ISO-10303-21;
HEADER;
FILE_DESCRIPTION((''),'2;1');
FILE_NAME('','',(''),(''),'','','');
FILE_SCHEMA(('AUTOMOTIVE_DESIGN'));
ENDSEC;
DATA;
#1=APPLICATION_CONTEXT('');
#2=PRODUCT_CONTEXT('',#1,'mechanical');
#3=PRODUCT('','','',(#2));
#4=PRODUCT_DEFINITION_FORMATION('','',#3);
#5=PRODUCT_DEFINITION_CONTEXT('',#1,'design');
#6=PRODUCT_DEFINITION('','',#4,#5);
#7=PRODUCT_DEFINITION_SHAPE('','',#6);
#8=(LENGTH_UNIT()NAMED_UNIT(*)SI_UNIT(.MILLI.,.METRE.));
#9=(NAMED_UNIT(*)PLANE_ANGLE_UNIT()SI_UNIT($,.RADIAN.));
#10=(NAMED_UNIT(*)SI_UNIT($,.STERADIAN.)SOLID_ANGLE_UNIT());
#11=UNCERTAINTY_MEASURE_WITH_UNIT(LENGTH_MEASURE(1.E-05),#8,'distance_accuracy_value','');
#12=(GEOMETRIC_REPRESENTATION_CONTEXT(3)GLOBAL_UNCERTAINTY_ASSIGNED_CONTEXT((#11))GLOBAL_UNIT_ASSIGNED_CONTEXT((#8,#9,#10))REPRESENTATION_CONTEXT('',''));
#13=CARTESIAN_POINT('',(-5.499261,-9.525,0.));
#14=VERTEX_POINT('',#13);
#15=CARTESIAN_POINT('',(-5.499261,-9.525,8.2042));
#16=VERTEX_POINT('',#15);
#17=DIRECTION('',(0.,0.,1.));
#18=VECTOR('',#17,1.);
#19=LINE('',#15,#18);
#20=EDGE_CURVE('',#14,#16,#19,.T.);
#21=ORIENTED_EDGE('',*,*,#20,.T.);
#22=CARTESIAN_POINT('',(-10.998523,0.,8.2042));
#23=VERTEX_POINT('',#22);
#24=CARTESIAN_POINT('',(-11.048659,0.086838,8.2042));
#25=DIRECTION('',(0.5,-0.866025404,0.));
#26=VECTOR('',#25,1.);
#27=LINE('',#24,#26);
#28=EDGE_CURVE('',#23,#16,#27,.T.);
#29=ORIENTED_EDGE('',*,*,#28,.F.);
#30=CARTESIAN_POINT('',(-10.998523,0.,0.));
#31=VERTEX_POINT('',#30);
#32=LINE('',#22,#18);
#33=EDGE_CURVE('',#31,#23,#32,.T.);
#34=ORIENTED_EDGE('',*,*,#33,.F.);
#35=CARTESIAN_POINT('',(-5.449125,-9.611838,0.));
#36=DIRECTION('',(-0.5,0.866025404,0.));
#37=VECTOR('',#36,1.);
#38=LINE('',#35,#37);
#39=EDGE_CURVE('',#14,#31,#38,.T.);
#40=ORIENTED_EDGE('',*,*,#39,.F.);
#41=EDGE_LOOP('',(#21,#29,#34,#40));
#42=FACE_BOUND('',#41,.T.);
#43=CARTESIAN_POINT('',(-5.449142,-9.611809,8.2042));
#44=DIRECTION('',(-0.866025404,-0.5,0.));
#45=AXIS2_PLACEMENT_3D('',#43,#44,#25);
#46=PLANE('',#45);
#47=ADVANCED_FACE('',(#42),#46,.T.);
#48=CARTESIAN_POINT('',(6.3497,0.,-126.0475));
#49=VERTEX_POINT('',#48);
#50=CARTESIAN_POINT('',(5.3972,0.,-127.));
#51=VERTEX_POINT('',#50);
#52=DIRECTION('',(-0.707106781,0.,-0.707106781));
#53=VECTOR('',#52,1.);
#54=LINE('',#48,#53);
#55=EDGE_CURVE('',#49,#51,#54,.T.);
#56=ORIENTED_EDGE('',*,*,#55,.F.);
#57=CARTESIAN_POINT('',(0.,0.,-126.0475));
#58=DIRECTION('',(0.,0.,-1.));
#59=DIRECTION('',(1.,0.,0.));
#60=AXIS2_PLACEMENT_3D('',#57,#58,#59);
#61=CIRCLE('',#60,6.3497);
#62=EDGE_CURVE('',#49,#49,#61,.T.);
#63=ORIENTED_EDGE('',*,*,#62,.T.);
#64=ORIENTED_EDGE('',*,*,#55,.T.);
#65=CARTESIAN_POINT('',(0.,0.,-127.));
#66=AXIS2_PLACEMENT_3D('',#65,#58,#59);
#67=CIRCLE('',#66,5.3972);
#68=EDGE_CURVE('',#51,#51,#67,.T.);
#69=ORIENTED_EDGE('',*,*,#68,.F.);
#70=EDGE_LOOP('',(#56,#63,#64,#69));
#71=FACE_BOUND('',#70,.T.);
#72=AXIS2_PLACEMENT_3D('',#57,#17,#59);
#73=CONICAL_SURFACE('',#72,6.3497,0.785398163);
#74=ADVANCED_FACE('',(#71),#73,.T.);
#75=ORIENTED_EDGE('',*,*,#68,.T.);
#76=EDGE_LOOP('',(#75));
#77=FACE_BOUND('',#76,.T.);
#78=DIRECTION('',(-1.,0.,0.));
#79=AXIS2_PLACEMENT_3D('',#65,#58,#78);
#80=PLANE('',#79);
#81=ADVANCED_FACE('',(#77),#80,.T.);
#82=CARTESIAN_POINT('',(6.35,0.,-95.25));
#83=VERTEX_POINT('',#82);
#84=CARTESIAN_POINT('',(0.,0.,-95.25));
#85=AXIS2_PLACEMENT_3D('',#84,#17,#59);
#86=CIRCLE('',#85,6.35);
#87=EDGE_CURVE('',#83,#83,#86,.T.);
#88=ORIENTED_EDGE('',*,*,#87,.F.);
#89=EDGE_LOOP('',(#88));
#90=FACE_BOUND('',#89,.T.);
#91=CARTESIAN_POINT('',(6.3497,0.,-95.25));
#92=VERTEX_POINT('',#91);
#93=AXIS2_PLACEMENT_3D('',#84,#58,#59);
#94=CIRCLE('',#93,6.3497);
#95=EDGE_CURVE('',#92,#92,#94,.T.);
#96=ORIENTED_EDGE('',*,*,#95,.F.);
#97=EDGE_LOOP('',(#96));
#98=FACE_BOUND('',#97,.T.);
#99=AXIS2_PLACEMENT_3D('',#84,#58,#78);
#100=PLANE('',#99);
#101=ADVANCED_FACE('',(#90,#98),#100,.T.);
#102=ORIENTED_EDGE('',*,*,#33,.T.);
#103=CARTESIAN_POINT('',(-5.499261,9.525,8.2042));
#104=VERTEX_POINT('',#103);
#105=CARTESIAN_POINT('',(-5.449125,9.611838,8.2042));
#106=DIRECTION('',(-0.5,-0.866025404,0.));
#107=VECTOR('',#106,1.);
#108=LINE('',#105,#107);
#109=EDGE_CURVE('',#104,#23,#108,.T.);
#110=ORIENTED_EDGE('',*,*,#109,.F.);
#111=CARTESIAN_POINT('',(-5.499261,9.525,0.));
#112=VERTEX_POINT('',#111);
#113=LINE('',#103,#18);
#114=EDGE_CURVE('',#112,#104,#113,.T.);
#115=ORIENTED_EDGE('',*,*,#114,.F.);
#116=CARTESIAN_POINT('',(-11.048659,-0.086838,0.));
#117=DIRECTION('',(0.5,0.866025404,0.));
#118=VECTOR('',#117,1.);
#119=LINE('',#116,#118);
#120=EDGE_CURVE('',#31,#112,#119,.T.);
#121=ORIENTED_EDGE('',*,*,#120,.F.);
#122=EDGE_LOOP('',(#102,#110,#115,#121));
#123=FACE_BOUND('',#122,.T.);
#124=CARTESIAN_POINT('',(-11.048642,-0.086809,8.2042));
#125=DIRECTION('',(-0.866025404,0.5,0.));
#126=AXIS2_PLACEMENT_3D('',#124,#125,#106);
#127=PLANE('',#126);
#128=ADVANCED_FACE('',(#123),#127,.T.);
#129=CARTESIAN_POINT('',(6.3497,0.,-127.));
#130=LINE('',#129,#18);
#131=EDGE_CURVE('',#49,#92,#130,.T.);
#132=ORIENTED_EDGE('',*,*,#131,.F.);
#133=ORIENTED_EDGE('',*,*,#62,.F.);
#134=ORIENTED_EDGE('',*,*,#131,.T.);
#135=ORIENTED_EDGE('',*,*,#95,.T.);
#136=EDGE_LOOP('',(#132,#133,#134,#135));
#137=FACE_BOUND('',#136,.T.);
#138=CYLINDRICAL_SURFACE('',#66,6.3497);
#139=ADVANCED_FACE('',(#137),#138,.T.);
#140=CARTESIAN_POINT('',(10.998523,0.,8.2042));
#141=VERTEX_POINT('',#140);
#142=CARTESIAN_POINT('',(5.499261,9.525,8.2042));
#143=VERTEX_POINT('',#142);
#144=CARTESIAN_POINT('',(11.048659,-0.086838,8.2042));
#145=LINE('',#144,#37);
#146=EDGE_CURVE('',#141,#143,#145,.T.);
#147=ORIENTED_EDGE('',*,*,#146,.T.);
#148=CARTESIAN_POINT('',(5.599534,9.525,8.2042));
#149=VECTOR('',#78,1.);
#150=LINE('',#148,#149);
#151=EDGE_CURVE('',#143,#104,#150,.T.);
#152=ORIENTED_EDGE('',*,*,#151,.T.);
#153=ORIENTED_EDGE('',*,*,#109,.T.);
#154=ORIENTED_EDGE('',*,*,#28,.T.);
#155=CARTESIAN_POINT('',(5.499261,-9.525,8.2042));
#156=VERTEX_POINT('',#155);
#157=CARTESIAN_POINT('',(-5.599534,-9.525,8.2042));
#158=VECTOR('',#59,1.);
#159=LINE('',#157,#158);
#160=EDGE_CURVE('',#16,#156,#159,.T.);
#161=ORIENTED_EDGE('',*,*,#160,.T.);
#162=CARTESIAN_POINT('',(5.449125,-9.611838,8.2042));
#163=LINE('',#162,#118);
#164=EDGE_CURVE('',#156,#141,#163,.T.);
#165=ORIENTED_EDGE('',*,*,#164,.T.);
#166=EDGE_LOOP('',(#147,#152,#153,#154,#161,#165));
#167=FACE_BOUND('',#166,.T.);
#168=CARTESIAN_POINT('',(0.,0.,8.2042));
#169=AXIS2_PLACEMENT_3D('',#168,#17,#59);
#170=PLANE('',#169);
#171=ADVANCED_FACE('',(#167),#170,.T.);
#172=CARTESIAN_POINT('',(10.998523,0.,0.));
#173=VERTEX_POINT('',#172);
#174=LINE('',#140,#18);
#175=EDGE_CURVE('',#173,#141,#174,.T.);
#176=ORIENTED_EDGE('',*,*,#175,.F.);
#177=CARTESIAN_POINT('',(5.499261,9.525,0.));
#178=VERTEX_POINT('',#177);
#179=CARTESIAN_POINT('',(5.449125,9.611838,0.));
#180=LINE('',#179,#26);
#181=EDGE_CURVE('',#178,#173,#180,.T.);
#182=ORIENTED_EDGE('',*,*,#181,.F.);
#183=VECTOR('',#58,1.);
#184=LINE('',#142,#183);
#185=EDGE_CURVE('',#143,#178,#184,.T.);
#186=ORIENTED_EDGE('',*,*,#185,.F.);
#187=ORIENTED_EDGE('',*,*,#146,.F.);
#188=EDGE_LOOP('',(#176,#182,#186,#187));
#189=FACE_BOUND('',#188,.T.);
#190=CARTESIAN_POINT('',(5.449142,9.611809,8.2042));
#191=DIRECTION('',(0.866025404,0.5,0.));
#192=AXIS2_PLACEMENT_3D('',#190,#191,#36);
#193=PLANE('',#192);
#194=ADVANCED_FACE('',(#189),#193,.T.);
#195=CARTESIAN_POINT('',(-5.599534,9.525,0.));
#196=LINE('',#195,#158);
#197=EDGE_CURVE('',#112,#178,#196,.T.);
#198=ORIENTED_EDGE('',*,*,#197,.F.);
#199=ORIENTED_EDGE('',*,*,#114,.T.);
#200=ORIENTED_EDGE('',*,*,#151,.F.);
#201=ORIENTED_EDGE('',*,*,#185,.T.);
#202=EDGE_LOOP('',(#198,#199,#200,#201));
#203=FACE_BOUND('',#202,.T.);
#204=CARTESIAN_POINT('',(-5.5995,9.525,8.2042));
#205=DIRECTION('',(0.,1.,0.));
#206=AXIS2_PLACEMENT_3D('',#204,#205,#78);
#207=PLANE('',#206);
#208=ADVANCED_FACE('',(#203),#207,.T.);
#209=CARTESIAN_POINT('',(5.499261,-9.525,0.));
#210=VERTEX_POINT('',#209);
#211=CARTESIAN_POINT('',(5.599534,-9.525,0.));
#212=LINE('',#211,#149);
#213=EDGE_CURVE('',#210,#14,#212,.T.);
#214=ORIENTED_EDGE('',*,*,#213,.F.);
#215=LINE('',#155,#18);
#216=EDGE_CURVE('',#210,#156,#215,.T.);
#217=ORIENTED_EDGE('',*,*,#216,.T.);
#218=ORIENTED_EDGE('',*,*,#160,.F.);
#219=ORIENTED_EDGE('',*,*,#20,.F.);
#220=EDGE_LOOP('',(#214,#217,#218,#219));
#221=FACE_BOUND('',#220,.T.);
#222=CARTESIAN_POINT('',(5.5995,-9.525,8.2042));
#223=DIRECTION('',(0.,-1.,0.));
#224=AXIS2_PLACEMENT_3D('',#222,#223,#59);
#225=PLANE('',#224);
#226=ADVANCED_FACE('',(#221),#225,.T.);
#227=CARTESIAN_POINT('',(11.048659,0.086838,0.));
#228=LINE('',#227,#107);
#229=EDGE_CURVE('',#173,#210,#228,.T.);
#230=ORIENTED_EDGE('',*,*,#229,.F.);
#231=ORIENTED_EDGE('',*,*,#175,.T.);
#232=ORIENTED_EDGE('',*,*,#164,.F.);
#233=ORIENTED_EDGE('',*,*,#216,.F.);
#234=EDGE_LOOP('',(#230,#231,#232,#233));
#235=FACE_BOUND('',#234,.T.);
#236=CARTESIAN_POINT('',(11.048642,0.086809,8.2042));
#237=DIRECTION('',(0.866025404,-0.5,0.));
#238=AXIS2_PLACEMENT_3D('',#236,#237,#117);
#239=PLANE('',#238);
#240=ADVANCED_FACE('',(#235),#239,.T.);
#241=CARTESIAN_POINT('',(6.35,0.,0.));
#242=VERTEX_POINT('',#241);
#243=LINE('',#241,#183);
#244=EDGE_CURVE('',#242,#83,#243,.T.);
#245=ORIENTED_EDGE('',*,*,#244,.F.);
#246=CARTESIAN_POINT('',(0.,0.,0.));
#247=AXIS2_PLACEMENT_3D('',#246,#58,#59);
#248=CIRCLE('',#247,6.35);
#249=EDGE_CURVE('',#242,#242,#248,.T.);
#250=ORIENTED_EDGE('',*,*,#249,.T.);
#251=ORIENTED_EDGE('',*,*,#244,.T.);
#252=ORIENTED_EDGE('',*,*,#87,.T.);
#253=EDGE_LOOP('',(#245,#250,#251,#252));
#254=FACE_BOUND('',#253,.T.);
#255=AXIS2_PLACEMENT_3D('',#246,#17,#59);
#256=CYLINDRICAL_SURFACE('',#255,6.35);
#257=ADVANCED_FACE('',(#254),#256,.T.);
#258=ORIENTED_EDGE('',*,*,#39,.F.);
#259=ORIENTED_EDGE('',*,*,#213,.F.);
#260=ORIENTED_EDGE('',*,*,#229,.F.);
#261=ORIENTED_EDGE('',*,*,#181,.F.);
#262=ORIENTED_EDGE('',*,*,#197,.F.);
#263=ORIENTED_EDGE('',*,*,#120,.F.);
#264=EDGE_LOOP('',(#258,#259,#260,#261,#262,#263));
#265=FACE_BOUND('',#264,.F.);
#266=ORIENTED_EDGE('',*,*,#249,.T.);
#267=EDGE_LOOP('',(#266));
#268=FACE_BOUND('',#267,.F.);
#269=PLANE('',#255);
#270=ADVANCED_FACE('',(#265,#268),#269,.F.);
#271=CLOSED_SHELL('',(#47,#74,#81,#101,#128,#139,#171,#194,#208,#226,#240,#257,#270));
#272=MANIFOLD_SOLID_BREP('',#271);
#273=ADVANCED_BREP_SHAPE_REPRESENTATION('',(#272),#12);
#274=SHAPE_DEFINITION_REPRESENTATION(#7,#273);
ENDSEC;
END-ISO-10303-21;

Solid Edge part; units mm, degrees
sketch "Sketch1" plane through (0, 0, 0) normal (0, 0, 1) x (1, 0, 0)
  circle A0 centre (0, 0) radius 11.049
  dimension "D1" = 22.098
extrude "Protrusion1" add sketch "Sketch1" along normal blind 8.2042
sketch "Sketch2" plane through (0, 0, 0) normal (0, 0, -1) x (1, 0, 0)
  circle A0 centre (0, 0) radius 6.35
extrude "Protrusion2" add sketch "Sketch2" along normal blind 127
sketch "Sketch3" plane through (0, 0, -127) normal (0, 0, -1) x (1, 0, 0)
  circle A0 centre (0, 0) radius 6.3497
extrude "Cutout1" cut sketch "Sketch3" against normal blind 31.75 flip side to cut
chamfer "Chamfer_1" distance 0.9525 angle 45 1 edges at (-6.3497, 0, -127)
sketch "Sketch4" plane through (0, 0, 8.2042) normal (0, 0, 1) x (1, 0, 0)
  line L0 (-5.5995, 9.525) -> (5.5995, 9.525)
  dimension "D1" = 19.05
extrude "Cutout2" cut sketch "Sketch4" against normal up to next material side at (0, 9.575, 8.2042)
pattern_circular "Pattern1" count 6 over 360 about axis through (0, 0, 8.2042) along (0, 0, 1) of "Cutout2"
properties part number "24100109"
